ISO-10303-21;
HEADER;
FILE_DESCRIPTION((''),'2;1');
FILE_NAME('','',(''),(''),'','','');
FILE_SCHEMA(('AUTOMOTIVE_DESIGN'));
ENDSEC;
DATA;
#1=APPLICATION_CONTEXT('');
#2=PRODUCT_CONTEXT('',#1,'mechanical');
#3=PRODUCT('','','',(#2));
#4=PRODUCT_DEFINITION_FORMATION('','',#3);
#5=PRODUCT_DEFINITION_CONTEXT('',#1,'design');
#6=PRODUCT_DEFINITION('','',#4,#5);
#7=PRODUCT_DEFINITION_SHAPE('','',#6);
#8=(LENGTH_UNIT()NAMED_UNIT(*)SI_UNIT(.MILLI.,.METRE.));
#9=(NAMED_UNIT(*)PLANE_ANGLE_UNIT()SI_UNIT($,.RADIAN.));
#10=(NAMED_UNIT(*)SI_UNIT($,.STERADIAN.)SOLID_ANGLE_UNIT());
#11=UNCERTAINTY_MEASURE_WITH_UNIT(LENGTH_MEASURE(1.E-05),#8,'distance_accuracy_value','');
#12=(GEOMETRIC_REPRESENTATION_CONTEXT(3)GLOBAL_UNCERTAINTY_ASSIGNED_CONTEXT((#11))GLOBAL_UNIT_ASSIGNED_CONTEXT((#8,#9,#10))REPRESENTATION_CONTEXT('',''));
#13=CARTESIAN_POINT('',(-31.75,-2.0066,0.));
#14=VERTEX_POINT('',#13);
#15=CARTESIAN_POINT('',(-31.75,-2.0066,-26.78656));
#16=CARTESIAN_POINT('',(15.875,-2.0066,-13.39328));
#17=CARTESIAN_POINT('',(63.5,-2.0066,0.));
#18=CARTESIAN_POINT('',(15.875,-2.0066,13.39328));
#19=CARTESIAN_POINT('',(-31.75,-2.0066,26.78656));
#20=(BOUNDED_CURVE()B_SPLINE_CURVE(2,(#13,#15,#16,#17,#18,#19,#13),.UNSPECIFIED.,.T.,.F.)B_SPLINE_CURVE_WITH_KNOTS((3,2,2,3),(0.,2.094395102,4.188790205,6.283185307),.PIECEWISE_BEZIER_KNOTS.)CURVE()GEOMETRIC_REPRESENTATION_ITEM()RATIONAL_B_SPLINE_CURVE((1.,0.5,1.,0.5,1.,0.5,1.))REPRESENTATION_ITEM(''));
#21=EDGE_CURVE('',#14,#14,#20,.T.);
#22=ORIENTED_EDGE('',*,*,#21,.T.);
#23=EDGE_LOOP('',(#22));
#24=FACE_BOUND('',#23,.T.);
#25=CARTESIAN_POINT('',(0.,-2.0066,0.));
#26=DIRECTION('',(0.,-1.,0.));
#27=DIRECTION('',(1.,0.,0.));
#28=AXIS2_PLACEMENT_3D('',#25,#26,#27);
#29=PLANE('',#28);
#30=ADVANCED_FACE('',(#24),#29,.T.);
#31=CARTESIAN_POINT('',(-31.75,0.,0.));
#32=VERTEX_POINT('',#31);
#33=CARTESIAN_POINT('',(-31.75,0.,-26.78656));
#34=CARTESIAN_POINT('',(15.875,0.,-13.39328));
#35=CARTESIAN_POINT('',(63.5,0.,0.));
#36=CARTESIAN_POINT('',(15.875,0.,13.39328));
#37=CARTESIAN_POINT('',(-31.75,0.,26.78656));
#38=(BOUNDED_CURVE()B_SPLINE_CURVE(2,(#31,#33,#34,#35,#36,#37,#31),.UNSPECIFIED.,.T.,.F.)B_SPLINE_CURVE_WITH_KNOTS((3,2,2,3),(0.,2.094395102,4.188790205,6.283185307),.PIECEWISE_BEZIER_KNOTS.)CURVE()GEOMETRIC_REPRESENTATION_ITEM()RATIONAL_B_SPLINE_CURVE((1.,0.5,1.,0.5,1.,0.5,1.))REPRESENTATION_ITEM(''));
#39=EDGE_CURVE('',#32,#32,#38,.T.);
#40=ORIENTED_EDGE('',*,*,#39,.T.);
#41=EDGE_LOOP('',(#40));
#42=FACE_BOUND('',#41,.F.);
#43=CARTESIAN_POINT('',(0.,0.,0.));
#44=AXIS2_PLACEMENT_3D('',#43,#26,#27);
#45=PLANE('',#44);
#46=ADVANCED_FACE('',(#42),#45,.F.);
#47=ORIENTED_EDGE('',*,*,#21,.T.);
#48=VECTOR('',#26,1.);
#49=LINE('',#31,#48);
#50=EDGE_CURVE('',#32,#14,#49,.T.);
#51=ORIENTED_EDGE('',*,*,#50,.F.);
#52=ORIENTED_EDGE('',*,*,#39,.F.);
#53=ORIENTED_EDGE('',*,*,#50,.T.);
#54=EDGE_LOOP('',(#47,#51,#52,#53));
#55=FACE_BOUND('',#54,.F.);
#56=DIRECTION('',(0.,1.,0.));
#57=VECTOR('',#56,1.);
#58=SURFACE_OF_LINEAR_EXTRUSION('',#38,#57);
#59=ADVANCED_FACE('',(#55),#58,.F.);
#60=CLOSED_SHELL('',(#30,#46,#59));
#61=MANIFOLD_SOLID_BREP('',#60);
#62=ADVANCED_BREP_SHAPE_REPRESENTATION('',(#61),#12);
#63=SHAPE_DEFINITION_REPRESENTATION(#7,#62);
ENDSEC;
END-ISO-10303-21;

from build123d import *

# Parameters (mm, degrees)
F1_DEPTH = 2.0066


# Not quite as in the source:
# - the program builds the solid bodies; features that only make, move or delete a surface that nothing else refers to are left out


with BuildPart() as f1:
    # F0 (on Front) → F1 (new body)
    with BuildSketch(Plane.XZ):
        with BuildLine():
            add(Edge.make_bspline(
                [(-31.75, 0), (-31.75, -26.7865598037), (15.875, -13.3932799019), (63.5, 0), (15.875, 13.3932799019), (-31.75, 26.7865598037), (-31.75, 0)],
                knots=[0, 0, 0, 2.0943951024, 2.0943951024, 4.1887902048, 4.1887902048, 6.2831853072, 6.2831853072, 6.2831853072], degree=2, weights=[1, 0.5, 1, 0.5, 1, 0.5, 1]))
        make_face()
    extrude(amount=F1_DEPTH)


solid = f1.part
